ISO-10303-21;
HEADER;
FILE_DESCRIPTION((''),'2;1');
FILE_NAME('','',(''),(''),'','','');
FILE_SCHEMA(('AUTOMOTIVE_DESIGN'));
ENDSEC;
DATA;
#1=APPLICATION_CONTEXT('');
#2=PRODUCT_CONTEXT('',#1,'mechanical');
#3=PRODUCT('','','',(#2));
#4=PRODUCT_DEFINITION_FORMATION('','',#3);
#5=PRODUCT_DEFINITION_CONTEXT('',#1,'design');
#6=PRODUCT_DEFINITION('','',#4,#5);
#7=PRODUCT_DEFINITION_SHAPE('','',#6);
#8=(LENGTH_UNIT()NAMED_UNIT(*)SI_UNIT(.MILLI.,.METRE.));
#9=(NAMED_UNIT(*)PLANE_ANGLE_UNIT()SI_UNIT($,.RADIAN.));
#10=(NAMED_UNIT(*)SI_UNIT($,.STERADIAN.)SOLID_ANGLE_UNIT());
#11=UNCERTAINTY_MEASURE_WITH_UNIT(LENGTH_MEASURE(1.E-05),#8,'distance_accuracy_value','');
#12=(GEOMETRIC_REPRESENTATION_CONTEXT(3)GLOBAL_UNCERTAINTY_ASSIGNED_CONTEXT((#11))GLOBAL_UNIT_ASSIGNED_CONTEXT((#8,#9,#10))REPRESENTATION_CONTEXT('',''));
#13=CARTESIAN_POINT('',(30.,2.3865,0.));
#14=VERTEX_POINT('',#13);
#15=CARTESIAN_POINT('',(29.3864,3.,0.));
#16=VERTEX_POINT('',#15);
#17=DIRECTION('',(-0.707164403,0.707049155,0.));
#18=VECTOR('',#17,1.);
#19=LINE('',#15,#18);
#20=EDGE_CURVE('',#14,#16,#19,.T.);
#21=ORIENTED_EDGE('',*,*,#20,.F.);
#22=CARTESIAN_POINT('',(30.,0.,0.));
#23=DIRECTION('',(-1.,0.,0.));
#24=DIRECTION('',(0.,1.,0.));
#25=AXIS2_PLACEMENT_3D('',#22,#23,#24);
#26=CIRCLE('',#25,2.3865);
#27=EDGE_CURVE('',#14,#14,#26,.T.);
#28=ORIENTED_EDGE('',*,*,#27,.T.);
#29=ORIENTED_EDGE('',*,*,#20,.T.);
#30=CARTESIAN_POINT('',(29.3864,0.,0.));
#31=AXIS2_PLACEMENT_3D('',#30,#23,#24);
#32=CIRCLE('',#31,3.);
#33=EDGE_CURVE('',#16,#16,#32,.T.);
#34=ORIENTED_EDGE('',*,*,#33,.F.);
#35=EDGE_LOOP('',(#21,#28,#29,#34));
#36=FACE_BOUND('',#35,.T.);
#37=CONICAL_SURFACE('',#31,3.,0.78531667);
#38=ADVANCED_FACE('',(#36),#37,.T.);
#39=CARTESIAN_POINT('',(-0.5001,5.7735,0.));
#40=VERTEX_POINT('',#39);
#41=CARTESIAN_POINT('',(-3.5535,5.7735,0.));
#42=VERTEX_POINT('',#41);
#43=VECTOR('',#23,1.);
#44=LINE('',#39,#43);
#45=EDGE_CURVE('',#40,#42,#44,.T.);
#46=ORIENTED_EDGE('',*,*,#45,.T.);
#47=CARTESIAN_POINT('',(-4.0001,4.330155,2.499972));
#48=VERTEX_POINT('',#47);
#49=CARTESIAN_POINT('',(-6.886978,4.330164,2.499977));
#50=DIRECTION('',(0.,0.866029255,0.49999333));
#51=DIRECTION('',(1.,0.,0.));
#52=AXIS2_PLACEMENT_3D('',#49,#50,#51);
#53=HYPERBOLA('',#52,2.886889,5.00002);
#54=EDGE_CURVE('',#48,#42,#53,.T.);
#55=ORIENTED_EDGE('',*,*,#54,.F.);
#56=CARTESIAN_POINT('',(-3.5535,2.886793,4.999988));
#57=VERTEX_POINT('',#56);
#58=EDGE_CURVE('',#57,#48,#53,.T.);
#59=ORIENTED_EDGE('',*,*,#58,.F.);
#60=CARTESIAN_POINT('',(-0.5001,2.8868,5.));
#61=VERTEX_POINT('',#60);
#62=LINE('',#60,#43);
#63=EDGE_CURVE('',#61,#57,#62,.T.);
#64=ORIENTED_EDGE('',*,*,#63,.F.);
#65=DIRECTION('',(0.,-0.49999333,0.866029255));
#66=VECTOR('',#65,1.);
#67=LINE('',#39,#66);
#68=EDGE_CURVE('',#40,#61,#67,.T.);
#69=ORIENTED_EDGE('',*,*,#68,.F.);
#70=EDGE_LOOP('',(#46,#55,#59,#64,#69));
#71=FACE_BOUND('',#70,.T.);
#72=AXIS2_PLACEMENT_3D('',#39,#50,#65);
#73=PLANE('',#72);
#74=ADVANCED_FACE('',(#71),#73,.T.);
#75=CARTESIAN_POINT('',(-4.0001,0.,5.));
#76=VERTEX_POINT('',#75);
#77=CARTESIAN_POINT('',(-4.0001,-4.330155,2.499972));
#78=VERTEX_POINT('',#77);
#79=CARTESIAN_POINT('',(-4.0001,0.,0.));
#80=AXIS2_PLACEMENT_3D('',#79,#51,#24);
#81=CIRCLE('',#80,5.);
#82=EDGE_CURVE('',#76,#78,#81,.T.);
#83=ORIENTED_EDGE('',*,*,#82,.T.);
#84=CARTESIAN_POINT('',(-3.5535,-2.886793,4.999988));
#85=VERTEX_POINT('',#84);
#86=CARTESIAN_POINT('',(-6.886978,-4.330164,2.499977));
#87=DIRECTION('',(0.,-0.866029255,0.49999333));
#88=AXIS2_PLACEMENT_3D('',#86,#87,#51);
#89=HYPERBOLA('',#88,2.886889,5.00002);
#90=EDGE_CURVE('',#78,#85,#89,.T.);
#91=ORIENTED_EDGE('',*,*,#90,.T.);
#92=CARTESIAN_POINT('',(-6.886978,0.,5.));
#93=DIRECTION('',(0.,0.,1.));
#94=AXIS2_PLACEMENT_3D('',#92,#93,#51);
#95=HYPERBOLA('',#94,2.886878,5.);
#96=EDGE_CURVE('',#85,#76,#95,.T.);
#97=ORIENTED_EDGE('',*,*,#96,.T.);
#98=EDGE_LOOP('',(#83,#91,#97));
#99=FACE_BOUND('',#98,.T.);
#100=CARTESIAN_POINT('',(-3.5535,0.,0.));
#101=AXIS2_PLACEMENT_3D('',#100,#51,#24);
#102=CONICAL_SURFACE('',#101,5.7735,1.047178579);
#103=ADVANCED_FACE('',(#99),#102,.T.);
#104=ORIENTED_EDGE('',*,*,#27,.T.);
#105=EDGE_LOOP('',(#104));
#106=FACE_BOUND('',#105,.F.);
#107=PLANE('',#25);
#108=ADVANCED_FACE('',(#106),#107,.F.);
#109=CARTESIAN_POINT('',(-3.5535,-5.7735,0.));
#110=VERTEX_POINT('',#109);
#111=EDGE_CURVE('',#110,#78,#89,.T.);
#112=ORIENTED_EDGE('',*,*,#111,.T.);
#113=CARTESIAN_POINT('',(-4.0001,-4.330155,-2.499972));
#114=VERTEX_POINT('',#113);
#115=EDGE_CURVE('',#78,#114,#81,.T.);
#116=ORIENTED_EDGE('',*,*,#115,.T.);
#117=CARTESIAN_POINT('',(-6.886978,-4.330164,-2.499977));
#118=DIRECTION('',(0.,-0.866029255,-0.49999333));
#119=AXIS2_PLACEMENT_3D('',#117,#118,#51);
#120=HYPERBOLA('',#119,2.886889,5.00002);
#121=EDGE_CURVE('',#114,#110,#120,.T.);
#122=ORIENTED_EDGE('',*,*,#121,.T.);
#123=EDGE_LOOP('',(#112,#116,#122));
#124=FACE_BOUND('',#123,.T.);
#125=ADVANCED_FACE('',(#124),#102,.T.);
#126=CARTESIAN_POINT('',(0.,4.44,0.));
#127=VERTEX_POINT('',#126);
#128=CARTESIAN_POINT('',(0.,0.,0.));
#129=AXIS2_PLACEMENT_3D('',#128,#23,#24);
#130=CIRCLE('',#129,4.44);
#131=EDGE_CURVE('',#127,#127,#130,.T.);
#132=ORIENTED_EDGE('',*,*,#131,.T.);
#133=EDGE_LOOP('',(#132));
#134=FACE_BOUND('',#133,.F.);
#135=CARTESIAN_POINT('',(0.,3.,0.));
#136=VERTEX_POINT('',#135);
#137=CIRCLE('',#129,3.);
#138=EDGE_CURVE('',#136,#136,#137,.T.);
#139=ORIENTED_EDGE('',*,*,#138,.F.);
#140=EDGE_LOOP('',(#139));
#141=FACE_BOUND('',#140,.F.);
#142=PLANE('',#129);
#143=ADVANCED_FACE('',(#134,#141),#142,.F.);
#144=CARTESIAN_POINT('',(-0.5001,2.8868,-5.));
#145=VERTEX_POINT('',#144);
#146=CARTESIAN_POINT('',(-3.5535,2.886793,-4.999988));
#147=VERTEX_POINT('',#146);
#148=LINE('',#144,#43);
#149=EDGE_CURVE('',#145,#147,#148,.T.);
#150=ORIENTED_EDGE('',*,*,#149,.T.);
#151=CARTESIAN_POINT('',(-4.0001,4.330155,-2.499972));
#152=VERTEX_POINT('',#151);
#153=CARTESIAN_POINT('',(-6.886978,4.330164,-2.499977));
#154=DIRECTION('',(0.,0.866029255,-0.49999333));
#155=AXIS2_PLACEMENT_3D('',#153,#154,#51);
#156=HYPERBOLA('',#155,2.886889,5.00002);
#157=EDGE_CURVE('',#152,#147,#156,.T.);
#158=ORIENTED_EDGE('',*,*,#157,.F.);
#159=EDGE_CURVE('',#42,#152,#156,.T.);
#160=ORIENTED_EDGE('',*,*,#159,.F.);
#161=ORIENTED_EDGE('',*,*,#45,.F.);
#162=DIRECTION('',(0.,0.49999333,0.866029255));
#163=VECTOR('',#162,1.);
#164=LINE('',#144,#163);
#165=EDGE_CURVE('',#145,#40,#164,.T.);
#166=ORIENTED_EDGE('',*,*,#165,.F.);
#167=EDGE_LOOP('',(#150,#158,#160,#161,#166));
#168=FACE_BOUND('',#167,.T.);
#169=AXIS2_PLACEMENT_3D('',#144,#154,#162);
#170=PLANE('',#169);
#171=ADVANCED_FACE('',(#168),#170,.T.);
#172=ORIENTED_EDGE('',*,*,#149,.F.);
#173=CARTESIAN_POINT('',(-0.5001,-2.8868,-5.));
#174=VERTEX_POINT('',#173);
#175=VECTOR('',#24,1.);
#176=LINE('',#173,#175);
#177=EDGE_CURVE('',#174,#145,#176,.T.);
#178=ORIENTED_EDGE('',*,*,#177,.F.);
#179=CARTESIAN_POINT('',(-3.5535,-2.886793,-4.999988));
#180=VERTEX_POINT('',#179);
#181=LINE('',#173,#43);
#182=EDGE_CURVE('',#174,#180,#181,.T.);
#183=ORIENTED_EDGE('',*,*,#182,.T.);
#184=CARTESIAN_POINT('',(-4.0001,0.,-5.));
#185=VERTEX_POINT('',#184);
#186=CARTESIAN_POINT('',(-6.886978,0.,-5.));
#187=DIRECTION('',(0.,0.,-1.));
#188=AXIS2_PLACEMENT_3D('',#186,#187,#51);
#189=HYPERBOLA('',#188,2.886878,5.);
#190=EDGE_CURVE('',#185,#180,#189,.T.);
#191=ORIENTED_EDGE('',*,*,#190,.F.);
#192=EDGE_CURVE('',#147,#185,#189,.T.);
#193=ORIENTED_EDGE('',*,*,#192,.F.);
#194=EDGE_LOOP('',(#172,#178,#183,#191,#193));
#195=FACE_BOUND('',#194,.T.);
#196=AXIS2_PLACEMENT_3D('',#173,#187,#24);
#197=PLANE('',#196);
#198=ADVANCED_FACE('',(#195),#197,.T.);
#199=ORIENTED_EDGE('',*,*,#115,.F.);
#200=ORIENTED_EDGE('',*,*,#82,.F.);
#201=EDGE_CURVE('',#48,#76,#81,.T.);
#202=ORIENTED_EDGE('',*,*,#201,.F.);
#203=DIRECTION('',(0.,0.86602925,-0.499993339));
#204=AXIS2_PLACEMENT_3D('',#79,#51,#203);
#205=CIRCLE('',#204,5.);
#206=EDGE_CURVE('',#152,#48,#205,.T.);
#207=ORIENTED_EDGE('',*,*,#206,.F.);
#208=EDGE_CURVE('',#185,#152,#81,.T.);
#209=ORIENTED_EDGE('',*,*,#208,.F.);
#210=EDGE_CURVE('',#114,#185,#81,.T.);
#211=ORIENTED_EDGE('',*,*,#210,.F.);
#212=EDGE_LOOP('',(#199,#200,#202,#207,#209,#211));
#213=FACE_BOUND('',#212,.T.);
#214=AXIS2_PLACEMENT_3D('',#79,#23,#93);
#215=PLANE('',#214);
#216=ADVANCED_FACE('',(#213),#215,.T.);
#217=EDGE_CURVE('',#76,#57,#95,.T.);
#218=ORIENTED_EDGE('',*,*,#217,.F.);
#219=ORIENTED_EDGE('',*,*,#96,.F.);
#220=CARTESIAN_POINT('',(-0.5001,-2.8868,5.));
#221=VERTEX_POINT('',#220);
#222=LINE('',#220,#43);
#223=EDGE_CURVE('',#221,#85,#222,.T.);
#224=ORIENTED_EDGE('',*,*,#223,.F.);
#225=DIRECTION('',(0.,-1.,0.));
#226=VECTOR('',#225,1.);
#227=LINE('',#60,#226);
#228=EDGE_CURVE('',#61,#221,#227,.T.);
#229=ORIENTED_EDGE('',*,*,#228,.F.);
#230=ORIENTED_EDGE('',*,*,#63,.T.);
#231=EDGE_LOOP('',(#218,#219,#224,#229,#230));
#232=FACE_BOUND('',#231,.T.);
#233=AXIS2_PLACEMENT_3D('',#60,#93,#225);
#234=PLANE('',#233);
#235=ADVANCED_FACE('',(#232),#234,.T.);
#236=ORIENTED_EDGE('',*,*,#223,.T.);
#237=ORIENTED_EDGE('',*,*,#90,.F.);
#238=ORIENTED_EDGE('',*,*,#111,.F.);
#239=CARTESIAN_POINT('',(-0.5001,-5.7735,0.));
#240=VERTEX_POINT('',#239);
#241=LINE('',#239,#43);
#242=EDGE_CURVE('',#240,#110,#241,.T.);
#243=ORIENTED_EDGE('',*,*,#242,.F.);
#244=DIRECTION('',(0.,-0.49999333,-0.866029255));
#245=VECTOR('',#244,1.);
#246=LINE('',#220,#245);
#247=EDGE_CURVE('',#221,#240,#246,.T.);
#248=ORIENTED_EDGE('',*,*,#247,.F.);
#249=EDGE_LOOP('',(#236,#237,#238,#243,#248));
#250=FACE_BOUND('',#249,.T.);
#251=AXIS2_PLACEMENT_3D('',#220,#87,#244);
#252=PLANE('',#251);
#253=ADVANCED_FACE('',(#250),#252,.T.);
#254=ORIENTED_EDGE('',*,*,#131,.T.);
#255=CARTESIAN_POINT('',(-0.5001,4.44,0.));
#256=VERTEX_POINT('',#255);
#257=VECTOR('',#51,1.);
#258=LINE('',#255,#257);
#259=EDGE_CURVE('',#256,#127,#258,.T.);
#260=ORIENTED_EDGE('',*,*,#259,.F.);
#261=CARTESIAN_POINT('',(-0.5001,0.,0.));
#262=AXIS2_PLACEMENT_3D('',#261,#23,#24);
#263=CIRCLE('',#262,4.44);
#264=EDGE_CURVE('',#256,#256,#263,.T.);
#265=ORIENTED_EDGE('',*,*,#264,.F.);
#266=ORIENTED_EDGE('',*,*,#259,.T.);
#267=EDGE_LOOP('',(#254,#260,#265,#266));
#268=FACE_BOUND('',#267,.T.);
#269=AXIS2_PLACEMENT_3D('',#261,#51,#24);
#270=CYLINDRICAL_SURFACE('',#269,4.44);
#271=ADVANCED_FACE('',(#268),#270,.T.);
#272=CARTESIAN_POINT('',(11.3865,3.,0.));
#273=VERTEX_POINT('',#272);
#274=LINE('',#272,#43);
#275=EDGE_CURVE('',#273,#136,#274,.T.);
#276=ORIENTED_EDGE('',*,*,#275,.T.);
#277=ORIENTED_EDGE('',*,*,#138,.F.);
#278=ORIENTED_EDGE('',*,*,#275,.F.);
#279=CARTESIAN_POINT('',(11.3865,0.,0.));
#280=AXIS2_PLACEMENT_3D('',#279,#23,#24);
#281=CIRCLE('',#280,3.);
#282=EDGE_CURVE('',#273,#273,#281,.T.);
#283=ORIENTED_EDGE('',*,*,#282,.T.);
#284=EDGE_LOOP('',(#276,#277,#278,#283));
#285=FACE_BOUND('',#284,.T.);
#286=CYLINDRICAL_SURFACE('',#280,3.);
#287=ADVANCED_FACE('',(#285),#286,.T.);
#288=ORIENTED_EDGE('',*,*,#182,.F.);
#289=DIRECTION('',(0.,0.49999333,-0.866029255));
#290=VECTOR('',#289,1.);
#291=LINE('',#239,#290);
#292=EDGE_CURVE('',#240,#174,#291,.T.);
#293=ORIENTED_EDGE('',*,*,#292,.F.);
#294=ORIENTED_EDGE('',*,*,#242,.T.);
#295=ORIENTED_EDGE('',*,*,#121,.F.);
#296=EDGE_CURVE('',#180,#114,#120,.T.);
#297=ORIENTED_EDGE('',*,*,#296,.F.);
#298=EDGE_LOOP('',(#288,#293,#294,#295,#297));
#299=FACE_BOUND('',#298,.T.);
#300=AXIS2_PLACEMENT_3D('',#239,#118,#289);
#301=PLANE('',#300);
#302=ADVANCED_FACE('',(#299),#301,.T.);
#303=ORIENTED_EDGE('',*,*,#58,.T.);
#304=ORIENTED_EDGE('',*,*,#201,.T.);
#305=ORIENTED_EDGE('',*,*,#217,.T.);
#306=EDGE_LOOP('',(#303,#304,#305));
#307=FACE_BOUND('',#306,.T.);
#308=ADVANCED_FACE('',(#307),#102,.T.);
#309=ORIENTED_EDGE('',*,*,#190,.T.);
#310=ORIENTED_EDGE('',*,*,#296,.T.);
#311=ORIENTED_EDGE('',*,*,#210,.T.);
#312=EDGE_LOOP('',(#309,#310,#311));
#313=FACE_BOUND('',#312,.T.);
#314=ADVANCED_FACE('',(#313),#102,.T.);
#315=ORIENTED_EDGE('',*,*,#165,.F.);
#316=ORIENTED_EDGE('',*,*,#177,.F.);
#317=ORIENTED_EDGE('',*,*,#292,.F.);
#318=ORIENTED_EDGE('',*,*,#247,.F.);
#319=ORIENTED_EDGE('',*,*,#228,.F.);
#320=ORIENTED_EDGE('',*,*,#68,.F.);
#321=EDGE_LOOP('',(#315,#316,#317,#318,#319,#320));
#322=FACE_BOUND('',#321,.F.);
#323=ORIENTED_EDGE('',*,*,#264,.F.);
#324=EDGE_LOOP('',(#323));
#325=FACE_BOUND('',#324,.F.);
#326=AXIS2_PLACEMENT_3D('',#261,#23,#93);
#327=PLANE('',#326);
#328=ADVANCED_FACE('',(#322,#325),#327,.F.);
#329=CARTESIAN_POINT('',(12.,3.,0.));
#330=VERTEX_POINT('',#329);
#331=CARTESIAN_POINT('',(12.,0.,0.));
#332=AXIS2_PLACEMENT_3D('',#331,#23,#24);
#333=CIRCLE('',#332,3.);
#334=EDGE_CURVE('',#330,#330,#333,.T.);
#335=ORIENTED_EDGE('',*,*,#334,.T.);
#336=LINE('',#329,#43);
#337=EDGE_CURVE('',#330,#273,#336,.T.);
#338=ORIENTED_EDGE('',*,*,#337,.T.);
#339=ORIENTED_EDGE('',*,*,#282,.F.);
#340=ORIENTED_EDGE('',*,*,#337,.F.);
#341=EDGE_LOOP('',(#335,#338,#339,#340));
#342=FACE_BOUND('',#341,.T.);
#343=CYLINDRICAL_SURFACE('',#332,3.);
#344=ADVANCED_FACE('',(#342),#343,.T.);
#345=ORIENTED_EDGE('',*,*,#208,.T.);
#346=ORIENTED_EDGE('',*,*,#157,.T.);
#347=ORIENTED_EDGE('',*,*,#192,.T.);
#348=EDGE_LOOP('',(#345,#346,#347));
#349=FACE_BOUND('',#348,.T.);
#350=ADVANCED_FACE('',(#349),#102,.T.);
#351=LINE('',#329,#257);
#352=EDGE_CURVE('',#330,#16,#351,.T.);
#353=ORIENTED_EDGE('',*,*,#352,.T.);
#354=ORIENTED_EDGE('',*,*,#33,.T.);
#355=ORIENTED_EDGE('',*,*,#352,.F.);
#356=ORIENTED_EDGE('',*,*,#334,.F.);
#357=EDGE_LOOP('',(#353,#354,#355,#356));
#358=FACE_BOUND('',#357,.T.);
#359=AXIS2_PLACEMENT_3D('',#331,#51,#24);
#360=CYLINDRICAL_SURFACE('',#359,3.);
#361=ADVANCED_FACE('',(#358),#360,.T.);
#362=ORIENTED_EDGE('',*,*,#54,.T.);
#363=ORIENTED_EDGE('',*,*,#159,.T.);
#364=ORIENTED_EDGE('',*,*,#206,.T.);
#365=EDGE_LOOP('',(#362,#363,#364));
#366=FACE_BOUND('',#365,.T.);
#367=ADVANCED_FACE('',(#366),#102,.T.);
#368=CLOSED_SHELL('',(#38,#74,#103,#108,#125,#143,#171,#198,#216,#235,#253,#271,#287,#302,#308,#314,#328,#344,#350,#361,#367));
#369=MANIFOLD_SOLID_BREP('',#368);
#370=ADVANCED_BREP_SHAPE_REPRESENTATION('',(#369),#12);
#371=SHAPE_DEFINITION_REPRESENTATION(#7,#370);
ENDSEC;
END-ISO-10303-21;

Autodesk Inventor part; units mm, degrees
ref_plane "YZ Plane" through (0, 0, 0) normal (1, 0, 0) x (0, 1, 0)
ref_plane "XZ Plane" through (0, 0, 0) normal (0, 1, 0) x (-1, 0, 0)
sketch "Sketch1" plane through (0, 0, 0) normal (0, 0, 1) x (1, 0, 0)
  line L0 (0, 4.44) -> (0, 3)
  line L1 (12, 3) -> (30, 3)
  line L2 (30, 3) -> (30, 0)
  line L3 (30, 0) -> (-0.5001, 0)
  line L4 (-6.6001, 0) -> (36.1, 0) projected
  line L5 (-0.5001, 0) -> (-0.5001, 4.44)
  line L6 (-0.5001, 4.44) -> (0, 4.44)
  line L7 (12, 3) -> (11.3865, 3)
  line L8 (11.3865, 3) -> (0, 3)
  line L9 (0, -0.888) -> (0, 5.328) projected
  dimension "d0" = 30
  dimension "d1" = 18
  dimension "d2" = 6
  dimension "d9" = 0.5001
  dimension "d10" = 8.88
  dimension "d13" = 0.6136
  dimension "d14" = 6
revolve "Body" add sketch "Sketch1" angle 360 about axis through (30, 0, 0) along (-1, 0, 0)
sketch "Sketch2" plane through (-0.5001, 0, 0) normal (-1, 0, 0) x (0, 0, 1)
  line L0 (0, 5.7735) -> (5, 2.8868)
  line L1 (5, 2.8868) -> (5, -2.8868)
  line L2 (5, -2.8868) -> (0, -5.7735)
  line L3 (0, -5.7735) -> (-5, -2.8868)
  line L4 (-5, -2.8868) -> (-5, 2.8868)
  line L5 (-5, 2.8868) -> (0, 5.7735)
  point P0 (0, 0)
  point P1 (0, 0)
  dimension "d11" = 10
extrude "Head" add sketch "Sketch2" along normal blind 3.5
sketch "Sketch4" plane through (0, 0, 0) normal (0, 0, 1) x (1, 0, 0)
  line L0 (-4.0001, 5) -> (-4.0001, 5.7735)
  line L1 (-4.0001, 5.7735) -> (-3.5535, 5.7735)
  line L2 (-3.5535, 5.7735) -> (-4.0001, 5)
  line L3 (-4.7001, 0) -> (0.1999, 0) projected
  line L4 (-0.5001, 5.7735) -> (-4.0001, 5.7735) projected
  line L5 (-4.0001, 2.8868) -> (-4.0001, 5.7735) projected
  dimension "d5" = 30
  dimension "d19" = 10
revolve "Chamfer1" cut sketch "Sketch4" angle 360 about axis through (-10, 0, 0) along (1, 0, 0)
thread "Thread" size "M6x1" class "6g" standard "ISO Metric profile" length 18
chamfer "Chamfer2" distance 0.6135 distance2 0.6136 1 edges at (30, -3, 0) measured on face at (30, 1.1079, -0.4377)
ref_plane "Work Plane1" through (1.525, 0, 0) normal (0, 0, 1) x (1, 0, 0)
equation "\"d0\" = NLG"
equation "\"d1\" = GEL"
equation "\"d2\" = GD"
equation "\"d10\" = SD2"
equation "\"d14\" = BDM"
equation "\"d11\" = SW"
equation "\"d3\" = KOH - SD"
equation "\"d5\" = ANG1"
equation "\"d19\" = SW0"
equation "\"d15\" = GEL"
equation "\"d6\" = -0.5 * SPD + 0.5 * GD"
equation "\"NLG\" = 30"
equation "\"GD\" = NND"
equation "\"BDM\" = NND"
equation "\"KOH\" = 4"
equation "\"GEL\" = 18"
equation "\"SW\" = 10"
equation "\"SW0\" = SW"
equation "\"SPD\" = NND - 1.2269 * PTC"
equation "\"SD2\" = 8.88"
equation "\"SD\" = 0.5"
equation "\"ANG1\" = 30deg"
equation "\"GAL\" = 0.61345 * PTC"
equation "\"GUL\" = 0.61345 * PTC"
equation "\"RR\" = 0.25"
equation "\"GD1\" = THREADDIA - 1.2269 * PTC"
equation "\"THREADDIA\" = 6"
equation "\"SDH\" = SD2"
equation "\"TOA\" = 30deg"
equation "\"PTC\" = 1"
equation "\"NND\" = 6"
equation "\"E0\" = 1.155 * SW"
properties part number "ISO 4014 - M6 x 30" material "Stainless Steel, 440C"
